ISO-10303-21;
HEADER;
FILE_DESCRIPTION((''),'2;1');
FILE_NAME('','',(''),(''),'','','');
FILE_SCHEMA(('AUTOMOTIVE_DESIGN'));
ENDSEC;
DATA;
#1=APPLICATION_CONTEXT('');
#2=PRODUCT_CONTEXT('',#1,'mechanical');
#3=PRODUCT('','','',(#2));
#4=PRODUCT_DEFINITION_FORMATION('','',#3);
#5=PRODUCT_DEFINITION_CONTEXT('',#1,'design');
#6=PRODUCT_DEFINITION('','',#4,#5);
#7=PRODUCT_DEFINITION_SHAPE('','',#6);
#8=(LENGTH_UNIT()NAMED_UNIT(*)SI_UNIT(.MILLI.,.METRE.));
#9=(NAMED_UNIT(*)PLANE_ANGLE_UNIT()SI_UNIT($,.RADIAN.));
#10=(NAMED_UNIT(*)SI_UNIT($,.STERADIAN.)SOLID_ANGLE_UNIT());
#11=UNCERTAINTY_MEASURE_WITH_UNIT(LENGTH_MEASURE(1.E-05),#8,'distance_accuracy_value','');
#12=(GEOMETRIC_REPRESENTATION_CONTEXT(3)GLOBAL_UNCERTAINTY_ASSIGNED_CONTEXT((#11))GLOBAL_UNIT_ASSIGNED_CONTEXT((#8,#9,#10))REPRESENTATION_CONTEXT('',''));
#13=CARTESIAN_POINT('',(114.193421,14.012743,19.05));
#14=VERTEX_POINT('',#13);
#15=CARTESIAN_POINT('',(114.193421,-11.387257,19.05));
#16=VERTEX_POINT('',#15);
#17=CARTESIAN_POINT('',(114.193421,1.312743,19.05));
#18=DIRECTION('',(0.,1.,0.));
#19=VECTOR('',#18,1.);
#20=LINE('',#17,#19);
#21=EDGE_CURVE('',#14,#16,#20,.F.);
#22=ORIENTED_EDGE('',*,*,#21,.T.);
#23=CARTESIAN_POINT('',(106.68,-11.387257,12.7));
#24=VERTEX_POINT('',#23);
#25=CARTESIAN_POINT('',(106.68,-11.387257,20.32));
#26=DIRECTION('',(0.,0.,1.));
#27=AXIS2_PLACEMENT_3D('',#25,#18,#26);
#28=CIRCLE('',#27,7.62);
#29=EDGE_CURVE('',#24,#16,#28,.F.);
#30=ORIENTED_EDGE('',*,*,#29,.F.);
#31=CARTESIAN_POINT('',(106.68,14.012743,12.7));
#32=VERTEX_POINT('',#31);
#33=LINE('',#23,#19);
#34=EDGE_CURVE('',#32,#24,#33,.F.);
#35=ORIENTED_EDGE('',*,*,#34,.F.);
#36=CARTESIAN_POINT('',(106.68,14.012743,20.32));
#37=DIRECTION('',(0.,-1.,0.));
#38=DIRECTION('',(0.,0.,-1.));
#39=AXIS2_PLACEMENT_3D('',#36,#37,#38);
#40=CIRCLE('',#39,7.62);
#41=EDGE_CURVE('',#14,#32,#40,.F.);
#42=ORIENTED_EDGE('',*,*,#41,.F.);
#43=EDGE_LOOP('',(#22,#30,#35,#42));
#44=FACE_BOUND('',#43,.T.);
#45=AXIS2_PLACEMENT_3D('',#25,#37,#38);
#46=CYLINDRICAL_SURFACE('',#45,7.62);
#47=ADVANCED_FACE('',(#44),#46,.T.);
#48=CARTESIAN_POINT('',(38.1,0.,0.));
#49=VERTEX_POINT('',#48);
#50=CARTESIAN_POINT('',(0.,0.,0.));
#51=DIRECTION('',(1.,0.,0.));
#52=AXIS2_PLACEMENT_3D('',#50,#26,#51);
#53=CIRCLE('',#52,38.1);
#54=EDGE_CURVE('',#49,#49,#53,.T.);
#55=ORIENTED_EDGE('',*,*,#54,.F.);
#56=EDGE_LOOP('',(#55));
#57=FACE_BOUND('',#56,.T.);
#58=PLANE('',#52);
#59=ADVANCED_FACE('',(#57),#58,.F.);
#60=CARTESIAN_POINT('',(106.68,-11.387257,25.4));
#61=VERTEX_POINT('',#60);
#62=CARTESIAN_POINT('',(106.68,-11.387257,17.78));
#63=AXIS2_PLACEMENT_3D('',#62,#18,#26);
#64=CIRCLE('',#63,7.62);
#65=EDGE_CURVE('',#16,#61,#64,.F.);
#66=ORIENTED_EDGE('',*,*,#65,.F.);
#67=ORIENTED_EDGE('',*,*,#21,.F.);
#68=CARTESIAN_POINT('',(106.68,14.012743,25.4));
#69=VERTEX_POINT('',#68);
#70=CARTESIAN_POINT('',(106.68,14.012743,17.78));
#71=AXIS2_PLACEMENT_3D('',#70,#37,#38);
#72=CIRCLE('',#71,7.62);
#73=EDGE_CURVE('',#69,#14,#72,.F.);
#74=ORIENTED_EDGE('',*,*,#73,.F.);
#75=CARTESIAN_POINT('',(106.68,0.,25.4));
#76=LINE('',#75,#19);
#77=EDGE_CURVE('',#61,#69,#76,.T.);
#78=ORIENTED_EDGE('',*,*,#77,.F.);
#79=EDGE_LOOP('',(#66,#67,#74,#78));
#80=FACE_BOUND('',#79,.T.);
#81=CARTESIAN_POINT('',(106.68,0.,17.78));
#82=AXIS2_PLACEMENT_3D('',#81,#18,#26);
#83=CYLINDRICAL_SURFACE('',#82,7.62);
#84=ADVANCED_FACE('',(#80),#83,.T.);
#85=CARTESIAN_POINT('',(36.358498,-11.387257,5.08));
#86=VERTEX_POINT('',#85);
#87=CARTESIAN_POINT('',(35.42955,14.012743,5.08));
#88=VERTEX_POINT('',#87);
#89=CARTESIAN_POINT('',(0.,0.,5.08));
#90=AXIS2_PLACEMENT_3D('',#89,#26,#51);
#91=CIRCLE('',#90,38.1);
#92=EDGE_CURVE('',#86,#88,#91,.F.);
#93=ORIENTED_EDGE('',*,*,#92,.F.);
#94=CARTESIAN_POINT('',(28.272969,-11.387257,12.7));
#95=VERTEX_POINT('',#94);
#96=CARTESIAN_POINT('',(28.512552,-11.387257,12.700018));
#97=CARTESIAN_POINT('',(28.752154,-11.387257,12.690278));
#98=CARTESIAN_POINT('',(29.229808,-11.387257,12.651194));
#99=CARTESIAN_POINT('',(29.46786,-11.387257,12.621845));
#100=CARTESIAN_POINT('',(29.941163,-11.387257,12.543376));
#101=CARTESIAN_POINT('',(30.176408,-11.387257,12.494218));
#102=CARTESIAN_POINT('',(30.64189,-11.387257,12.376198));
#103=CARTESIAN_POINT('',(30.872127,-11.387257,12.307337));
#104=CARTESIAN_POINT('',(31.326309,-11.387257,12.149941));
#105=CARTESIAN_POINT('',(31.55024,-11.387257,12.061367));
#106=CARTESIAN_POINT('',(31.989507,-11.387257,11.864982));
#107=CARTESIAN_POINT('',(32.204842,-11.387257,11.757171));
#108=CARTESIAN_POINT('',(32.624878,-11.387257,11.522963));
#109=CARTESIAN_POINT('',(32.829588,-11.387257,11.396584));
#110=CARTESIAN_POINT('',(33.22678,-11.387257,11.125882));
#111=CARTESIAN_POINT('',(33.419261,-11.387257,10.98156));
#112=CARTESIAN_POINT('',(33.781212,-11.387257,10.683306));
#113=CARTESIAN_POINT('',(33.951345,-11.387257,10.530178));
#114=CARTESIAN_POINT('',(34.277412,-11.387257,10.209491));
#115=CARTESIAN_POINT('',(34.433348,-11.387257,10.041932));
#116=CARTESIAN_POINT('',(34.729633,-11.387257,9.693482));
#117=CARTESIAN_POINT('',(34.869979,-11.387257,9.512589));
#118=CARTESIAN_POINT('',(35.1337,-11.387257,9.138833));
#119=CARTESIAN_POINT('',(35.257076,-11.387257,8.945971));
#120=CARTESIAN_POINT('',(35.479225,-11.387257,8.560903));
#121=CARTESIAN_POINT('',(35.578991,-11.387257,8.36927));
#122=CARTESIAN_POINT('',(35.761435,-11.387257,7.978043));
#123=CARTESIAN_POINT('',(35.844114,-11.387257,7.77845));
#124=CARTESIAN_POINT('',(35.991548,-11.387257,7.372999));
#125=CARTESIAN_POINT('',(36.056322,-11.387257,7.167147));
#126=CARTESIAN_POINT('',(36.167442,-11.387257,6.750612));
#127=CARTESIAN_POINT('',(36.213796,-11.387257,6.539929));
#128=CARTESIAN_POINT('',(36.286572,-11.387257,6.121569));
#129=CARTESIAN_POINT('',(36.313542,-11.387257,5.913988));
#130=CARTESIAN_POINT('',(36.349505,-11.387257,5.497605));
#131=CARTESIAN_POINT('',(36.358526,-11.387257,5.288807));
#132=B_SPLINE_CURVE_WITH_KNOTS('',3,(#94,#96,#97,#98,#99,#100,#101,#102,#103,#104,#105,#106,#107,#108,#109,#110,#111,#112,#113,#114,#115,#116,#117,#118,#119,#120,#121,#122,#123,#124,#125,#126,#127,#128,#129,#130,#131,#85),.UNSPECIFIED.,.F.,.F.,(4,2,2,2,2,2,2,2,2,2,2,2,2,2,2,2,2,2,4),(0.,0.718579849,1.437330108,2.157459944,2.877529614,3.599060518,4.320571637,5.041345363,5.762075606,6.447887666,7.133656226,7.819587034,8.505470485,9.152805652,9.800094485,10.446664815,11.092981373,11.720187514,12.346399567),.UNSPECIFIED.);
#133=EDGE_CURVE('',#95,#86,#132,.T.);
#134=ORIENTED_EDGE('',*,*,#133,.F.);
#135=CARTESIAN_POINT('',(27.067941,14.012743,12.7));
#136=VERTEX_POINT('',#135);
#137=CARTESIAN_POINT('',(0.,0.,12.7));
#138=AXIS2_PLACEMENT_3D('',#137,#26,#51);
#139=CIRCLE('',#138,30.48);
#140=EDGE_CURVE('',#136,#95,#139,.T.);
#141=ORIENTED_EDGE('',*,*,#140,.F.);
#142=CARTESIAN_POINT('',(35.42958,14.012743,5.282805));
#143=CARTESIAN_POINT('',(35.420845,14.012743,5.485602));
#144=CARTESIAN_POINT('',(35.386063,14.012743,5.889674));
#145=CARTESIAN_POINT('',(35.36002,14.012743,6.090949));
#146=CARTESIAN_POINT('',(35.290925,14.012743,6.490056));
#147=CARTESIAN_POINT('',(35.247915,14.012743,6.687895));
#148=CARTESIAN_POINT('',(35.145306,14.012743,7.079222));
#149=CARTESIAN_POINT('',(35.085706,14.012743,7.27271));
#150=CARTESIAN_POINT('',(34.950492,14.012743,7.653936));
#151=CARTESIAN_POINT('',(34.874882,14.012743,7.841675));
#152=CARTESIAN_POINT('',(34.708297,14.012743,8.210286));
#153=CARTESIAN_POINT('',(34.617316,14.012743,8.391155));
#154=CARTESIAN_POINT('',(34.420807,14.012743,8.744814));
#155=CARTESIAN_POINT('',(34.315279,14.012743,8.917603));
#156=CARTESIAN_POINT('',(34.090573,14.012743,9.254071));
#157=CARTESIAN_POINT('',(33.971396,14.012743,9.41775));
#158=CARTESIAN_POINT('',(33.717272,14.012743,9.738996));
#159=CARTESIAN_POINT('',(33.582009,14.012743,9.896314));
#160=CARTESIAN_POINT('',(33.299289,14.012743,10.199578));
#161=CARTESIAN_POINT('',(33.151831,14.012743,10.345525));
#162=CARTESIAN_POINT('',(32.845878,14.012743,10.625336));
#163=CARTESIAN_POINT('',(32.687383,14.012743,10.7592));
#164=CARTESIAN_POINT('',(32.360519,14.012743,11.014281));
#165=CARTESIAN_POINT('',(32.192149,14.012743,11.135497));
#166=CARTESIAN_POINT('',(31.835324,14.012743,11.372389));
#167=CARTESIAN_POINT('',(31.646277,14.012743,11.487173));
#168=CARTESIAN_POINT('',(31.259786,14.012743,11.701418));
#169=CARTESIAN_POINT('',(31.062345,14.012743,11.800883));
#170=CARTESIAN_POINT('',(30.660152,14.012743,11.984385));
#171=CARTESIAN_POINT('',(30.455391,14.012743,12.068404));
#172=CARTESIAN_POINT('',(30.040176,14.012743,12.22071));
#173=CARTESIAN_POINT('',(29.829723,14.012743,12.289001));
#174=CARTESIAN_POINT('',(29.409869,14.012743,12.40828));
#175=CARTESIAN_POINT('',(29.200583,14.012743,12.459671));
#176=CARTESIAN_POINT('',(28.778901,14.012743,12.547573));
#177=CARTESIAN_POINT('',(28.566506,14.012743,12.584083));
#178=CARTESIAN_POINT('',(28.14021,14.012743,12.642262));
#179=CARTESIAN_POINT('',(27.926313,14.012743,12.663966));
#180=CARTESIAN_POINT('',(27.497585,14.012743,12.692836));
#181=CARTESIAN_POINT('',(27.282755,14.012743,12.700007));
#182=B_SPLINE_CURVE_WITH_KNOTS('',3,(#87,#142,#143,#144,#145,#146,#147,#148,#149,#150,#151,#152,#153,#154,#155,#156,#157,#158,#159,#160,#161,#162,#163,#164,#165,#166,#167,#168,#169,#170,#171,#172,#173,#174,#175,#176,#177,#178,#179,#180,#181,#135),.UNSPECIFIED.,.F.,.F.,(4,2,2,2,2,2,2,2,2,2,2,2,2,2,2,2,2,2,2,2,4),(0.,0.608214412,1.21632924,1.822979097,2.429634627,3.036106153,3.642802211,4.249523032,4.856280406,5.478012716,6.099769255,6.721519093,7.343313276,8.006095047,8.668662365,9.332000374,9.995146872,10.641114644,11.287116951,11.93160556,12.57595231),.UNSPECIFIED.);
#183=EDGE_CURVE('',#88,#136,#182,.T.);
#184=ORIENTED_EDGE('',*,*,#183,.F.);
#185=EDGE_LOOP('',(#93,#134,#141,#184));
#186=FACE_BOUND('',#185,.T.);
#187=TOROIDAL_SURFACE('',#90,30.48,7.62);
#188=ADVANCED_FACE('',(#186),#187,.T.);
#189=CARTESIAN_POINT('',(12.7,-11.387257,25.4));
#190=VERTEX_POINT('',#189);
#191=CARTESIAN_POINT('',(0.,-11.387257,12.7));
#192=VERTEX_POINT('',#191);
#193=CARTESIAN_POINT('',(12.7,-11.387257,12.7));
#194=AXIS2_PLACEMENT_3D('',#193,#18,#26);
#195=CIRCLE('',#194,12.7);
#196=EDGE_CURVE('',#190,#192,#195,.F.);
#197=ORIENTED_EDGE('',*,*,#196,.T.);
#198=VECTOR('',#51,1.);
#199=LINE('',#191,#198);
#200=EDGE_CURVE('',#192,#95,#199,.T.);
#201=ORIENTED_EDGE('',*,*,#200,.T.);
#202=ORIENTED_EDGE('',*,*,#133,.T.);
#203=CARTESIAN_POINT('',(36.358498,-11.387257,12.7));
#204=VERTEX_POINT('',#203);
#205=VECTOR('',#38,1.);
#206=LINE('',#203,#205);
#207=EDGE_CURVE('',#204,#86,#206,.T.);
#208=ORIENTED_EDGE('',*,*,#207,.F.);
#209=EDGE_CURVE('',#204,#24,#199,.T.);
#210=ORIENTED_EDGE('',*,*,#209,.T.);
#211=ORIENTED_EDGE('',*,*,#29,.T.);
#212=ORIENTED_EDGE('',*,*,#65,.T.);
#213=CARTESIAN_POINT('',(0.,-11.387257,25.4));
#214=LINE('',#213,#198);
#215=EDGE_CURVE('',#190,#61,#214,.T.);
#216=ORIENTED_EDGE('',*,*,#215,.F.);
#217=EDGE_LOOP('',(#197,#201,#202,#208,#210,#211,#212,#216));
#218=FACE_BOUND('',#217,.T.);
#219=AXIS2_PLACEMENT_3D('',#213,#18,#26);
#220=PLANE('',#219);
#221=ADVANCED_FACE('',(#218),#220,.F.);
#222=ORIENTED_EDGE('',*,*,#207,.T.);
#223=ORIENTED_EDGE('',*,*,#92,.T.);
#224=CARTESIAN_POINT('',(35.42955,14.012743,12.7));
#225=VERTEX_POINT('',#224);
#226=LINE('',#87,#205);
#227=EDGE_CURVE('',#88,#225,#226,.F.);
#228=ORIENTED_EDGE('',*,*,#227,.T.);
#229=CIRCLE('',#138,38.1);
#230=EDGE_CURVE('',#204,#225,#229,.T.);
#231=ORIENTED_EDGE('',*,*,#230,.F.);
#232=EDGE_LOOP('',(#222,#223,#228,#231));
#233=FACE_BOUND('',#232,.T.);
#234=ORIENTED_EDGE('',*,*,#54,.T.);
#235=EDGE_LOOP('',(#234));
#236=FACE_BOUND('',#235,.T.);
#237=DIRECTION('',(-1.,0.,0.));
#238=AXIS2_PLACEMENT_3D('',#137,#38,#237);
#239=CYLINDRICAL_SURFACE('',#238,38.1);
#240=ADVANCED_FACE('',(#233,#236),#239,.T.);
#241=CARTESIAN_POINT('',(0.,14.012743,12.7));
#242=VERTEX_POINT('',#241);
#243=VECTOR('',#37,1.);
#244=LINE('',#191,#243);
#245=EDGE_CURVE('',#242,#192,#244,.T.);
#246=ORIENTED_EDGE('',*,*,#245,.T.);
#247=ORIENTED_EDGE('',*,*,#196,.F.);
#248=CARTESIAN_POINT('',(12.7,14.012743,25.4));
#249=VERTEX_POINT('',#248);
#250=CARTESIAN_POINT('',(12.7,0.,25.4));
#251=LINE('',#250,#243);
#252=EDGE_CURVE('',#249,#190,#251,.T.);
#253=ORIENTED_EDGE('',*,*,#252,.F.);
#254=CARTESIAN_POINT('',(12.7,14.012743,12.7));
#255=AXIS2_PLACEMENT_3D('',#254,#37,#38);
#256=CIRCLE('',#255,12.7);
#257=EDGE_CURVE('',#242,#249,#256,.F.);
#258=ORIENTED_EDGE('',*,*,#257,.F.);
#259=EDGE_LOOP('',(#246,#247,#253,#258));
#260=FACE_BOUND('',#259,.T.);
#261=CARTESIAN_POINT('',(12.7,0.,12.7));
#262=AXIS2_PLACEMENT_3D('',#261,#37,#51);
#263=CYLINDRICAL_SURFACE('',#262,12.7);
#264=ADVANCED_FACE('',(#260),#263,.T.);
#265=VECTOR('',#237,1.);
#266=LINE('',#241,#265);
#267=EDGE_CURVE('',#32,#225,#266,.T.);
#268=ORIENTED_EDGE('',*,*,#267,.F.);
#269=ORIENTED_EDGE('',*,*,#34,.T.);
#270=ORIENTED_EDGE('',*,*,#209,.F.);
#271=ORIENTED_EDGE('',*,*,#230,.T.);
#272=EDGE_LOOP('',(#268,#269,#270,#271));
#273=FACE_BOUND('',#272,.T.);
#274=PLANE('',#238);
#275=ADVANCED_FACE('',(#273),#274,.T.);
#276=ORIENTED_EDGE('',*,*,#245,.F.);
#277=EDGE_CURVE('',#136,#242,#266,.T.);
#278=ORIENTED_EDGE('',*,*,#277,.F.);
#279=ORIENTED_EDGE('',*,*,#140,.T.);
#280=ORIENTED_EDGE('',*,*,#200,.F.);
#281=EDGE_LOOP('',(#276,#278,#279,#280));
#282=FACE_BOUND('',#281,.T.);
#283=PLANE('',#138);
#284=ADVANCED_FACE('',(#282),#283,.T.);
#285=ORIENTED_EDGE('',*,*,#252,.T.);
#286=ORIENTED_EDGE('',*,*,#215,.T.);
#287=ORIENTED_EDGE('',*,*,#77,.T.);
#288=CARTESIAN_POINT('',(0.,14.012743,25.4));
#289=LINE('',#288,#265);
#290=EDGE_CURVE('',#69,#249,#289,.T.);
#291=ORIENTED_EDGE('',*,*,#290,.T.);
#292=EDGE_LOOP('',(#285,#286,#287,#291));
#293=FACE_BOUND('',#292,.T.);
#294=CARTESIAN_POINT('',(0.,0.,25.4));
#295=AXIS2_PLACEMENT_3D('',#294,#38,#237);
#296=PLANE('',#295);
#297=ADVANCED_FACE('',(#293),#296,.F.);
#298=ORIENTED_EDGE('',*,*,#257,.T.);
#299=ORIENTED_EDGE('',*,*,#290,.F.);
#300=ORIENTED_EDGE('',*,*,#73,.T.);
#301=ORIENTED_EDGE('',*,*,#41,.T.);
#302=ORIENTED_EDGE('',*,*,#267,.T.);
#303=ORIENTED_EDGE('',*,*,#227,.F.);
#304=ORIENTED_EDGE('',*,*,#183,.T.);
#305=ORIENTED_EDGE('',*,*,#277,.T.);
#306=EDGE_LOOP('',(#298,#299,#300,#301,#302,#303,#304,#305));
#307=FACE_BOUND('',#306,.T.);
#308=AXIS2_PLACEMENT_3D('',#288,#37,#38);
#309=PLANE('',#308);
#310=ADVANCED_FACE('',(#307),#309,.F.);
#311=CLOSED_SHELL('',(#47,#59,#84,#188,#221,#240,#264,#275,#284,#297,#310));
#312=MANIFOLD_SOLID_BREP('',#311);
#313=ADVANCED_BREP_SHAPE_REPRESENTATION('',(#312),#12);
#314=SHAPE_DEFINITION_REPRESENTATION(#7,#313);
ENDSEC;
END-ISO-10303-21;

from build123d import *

# Parameters (mm, degrees)
SKETCH1_R           = 38.1
BOSS_EXTRUDE1_DEPTH = 12.7
SKETCH2_W           = 114.3
SKETCH2_H           = 25.4
BOSS_EXTRUDE2_DEPTH = 12.7
FILLET1_R           = 12.7
FILLET4_R           = 7.62
FILLET5_R           = 7.62


# Some blends are built 0.0001 mm under size
with BuildPart() as part:
    # Sketch1 → Boss-Extrude1 (new body)
    with BuildSketch(Plane.XY):
        Circle(SKETCH1_R)
    extrude(amount=BOSS_EXTRUDE1_DEPTH)

    # Sketch2 → Boss-Extrude2 (add)
    with BuildSketch(Plane.XY.offset(12.7)):
        with Locations((57.15, 1.312743298)):
            Rectangle(SKETCH2_W, SKETCH2_H)
    extrude(amount=BOSS_EXTRUDE2_DEPTH)

    # Fillet1
    fillet1_edges = [part.edges().sort_by_distance(p)[0] for p in [
        (0, 1.312743298, 25.4),
    ]]
    fillet(fillet1_edges, radius=FILLET1_R - 0.0001)  # a hair under: the kernel refuses the full size

    # Fillet4
    # the kernel refuses this fillet: 7.62 mm, written as the material it takes off along each edge
    with BuildSketch(Plane(origin=(114.3, -30.437256702, 12.7), x_dir=(-1, 0, 0), z_dir=(0, 1, 0))) as fillet4_piece_1:
        with BuildLine():
            CenterArc((FILLET4_R, FILLET4_R), FILLET4_R, 180, 90)
            Line((0, FILLET4_R), (0, 0))
            Line((0, 0), (FILLET4_R, 0))
        make_face()
    extrude(amount=63.5, mode=Mode.SUBTRACT)
    with BuildSketch(Plane(origin=(114.3, -30.437256702, 25.4), x_dir=(-1, 0, 0), z_dir=(0, 1, 0))) as fillet4_piece_2:
        with BuildLine():
            CenterArc((FILLET4_R, -FILLET4_R), FILLET4_R, 90, 90)
            Line((0, -FILLET4_R), (0, 0))
            Line((0, 0), (FILLET4_R, 0))
        make_face()
    extrude(amount=63.5, mode=Mode.SUBTRACT)

    # Fillet5
    fillet5_edges = [part.edges().sort_by_distance(p)[0] for p in [
        (-38.074544895, -1.392490946, 12.7),
    ]]
    fillet(fillet5_edges, radius=FILLET5_R)


solid = part.part
